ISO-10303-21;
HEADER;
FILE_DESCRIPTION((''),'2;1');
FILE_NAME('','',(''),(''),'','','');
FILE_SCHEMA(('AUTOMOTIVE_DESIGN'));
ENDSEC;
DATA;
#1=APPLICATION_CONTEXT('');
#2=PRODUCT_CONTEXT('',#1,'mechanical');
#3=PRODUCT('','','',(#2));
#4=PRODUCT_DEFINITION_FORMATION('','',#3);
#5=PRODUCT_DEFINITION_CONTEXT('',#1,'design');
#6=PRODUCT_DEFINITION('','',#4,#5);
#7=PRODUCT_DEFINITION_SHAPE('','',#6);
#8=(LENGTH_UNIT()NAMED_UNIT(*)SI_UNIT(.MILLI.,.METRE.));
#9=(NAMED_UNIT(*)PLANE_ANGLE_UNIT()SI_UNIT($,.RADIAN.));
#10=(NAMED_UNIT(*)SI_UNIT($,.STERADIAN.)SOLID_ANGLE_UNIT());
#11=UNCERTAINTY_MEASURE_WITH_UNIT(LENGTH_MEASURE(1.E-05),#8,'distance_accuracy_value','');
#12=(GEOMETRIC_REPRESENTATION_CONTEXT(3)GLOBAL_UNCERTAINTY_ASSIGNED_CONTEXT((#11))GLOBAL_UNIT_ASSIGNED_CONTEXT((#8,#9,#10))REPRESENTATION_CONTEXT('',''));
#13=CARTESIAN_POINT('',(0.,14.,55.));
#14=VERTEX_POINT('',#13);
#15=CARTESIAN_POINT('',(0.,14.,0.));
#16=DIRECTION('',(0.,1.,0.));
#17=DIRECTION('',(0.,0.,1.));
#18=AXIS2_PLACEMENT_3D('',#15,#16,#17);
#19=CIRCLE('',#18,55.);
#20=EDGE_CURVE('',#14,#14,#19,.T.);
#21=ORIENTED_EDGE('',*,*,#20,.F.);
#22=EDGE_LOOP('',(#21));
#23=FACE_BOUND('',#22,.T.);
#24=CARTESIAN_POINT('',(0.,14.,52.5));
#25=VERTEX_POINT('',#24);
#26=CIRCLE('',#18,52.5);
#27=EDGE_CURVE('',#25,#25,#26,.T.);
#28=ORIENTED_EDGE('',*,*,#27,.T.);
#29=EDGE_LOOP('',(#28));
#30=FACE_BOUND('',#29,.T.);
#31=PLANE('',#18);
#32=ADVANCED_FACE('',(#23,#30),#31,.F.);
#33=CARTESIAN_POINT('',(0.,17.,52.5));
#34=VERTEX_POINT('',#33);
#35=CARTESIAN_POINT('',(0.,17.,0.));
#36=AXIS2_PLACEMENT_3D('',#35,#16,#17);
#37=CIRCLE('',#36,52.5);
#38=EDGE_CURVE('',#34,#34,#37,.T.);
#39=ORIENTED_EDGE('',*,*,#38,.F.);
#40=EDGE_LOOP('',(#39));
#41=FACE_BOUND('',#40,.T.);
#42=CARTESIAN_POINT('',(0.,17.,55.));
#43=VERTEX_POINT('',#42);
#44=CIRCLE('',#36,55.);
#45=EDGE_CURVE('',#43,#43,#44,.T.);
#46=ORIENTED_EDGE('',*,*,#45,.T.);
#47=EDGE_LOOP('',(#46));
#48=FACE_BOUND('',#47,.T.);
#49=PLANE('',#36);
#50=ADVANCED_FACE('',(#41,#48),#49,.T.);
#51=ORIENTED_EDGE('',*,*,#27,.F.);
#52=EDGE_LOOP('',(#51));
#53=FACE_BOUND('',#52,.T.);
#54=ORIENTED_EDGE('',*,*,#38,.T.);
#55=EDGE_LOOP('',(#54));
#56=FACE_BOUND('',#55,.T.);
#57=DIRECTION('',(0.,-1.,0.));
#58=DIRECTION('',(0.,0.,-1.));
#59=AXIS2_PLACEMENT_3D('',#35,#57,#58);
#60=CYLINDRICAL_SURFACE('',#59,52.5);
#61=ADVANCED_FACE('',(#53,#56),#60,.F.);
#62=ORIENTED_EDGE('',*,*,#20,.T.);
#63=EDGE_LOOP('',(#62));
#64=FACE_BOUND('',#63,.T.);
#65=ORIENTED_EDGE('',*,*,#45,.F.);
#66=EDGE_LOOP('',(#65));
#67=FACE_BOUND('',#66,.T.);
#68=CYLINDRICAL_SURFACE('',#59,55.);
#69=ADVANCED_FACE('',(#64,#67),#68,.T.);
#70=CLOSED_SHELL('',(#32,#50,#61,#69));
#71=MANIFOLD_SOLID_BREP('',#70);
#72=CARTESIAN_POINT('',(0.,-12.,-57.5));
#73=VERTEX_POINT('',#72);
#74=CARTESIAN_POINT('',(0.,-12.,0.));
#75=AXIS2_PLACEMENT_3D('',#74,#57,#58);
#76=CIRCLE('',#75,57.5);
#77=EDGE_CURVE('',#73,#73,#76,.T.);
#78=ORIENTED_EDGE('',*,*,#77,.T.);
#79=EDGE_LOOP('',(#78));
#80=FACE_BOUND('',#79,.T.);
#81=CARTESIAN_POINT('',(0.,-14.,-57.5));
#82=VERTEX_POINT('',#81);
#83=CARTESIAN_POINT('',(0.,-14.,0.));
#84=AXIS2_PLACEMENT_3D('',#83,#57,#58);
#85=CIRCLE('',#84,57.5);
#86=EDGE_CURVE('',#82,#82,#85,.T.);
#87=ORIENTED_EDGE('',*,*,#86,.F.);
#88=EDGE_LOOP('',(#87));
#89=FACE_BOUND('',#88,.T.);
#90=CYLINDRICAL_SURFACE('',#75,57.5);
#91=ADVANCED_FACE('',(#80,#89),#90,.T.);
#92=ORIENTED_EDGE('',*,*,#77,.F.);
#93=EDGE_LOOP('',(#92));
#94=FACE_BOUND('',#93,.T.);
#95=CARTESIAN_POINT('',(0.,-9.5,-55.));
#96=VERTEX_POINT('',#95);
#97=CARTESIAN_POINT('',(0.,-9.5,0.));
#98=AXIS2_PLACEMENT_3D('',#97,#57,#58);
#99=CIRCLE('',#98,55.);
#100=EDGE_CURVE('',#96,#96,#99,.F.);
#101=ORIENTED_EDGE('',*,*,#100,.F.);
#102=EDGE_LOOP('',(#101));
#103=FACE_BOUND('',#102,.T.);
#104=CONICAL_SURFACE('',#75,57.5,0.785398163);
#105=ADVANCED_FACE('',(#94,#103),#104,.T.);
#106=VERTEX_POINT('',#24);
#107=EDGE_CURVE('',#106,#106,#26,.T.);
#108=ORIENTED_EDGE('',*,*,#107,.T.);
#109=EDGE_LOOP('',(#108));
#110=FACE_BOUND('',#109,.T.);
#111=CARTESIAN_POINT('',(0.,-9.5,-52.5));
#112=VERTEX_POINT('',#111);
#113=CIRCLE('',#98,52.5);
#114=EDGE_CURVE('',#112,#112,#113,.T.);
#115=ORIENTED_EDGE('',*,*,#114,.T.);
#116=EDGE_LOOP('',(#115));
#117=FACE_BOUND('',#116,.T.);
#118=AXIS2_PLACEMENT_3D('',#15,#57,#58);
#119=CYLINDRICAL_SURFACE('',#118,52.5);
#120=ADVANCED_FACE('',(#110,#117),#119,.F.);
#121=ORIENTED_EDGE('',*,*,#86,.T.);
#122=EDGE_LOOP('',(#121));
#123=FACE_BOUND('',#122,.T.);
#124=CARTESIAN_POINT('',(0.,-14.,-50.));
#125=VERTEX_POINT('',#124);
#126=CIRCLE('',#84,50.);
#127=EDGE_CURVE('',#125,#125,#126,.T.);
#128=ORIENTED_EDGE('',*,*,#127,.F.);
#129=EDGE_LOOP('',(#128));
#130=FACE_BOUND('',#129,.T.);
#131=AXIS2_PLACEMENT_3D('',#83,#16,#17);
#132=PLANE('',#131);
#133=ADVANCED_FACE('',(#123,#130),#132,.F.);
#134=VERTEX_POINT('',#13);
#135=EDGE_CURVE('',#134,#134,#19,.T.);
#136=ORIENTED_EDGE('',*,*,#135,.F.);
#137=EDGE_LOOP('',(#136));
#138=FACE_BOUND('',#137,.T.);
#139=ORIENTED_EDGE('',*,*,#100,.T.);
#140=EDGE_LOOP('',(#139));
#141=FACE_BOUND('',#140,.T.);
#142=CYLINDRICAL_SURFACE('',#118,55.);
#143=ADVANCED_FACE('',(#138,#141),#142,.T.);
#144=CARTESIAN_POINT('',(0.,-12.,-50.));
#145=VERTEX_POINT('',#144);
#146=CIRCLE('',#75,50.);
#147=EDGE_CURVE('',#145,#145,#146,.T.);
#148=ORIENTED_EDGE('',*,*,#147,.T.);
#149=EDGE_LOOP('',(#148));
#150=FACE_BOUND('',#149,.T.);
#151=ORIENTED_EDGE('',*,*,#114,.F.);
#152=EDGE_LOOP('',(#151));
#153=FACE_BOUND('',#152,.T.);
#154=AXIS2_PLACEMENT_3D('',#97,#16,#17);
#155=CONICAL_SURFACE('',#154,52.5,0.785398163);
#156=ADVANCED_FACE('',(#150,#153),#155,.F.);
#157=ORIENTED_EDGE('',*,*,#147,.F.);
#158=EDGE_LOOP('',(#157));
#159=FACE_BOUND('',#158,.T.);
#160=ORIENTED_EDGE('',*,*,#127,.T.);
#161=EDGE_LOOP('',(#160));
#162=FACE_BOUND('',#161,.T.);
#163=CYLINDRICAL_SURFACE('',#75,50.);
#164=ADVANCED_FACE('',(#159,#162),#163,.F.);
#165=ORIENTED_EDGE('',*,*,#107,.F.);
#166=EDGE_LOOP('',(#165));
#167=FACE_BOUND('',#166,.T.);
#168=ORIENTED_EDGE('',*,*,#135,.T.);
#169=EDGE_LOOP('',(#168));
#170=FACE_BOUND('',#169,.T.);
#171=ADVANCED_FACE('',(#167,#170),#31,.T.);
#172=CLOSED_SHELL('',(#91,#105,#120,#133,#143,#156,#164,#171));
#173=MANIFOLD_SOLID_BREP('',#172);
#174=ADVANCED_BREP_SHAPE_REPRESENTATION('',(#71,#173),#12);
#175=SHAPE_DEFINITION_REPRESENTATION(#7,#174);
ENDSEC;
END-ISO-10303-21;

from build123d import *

# Parameters (mm, degrees)
SKETCH1_R           = 55
SKETCH1_R_2         = 52.5
BOSS_EXTRUDE1_DEPTH = 14
SKETCH2_R           = 57.5
SKETCH2_R_2         = 50
BOSS_EXTRUDE2_DEPTH = 2
CHAMFER1_SIZE       = 2.5
SKETCH3_R           = 55
SKETCH3_R_2         = 52.5
BOSS_EXTRUDE3_DEPTH = 3


with BuildPart() as part:
    # Sketch1 → Boss-Extrude1 (new, symmetric)
    with BuildSketch(Plane(origin=(0, 0, 0), x_dir=(1, 0, 0), z_dir=(0, 1, 0))):
        with Locations(Location((0, 0, 0), (0, 0, 270))):
            Circle(SKETCH1_R)
        with Locations(Location((0, 0, 0), (0, 0, 270))):
            Circle(SKETCH1_R_2, mode=Mode.SUBTRACT)
    extrude(amount=BOSS_EXTRUDE1_DEPTH, both=True)

    # Sketch2 → Boss-Extrude2 (add)
    with BuildSketch(Plane.XZ.offset(14)):
        with Locations(Location((0, 0, 0), (0, 0, 270))):
            Circle(SKETCH2_R)
        with Locations(Location((0, 0, 0), (0, 0, 270))):
            Circle(SKETCH2_R_2, mode=Mode.SUBTRACT)
    extrude(amount=-BOSS_EXTRUDE2_DEPTH)

    # Chamfer1
    chamfer1_edges = [part.edges().sort_by_distance(p)[0] for p in [
        (0, -12, -55),
        (0, -12, -52.5),
    ]]
    chamfer(chamfer1_edges, length=CHAMFER1_SIZE - 0.0001)  # a hair under: the kernel refuses the full size


with BuildPart() as body_2:
    # Sketch3 → Boss-Extrude3 (new body)
    with BuildSketch(Plane(origin=(0, 14, 0), x_dir=(1, 0, 0), z_dir=(0, 1, 0))):
        with Locations(Location((0, 0, 0), (0, 0, 270))):
            Circle(SKETCH3_R)
        with Locations(Location((0, 0, 0), (0, 0, 270))):
            Circle(SKETCH3_R_2, mode=Mode.SUBTRACT)
    extrude(amount=BOSS_EXTRUDE3_DEPTH)


solid = Compound([part.part, body_2.part])
